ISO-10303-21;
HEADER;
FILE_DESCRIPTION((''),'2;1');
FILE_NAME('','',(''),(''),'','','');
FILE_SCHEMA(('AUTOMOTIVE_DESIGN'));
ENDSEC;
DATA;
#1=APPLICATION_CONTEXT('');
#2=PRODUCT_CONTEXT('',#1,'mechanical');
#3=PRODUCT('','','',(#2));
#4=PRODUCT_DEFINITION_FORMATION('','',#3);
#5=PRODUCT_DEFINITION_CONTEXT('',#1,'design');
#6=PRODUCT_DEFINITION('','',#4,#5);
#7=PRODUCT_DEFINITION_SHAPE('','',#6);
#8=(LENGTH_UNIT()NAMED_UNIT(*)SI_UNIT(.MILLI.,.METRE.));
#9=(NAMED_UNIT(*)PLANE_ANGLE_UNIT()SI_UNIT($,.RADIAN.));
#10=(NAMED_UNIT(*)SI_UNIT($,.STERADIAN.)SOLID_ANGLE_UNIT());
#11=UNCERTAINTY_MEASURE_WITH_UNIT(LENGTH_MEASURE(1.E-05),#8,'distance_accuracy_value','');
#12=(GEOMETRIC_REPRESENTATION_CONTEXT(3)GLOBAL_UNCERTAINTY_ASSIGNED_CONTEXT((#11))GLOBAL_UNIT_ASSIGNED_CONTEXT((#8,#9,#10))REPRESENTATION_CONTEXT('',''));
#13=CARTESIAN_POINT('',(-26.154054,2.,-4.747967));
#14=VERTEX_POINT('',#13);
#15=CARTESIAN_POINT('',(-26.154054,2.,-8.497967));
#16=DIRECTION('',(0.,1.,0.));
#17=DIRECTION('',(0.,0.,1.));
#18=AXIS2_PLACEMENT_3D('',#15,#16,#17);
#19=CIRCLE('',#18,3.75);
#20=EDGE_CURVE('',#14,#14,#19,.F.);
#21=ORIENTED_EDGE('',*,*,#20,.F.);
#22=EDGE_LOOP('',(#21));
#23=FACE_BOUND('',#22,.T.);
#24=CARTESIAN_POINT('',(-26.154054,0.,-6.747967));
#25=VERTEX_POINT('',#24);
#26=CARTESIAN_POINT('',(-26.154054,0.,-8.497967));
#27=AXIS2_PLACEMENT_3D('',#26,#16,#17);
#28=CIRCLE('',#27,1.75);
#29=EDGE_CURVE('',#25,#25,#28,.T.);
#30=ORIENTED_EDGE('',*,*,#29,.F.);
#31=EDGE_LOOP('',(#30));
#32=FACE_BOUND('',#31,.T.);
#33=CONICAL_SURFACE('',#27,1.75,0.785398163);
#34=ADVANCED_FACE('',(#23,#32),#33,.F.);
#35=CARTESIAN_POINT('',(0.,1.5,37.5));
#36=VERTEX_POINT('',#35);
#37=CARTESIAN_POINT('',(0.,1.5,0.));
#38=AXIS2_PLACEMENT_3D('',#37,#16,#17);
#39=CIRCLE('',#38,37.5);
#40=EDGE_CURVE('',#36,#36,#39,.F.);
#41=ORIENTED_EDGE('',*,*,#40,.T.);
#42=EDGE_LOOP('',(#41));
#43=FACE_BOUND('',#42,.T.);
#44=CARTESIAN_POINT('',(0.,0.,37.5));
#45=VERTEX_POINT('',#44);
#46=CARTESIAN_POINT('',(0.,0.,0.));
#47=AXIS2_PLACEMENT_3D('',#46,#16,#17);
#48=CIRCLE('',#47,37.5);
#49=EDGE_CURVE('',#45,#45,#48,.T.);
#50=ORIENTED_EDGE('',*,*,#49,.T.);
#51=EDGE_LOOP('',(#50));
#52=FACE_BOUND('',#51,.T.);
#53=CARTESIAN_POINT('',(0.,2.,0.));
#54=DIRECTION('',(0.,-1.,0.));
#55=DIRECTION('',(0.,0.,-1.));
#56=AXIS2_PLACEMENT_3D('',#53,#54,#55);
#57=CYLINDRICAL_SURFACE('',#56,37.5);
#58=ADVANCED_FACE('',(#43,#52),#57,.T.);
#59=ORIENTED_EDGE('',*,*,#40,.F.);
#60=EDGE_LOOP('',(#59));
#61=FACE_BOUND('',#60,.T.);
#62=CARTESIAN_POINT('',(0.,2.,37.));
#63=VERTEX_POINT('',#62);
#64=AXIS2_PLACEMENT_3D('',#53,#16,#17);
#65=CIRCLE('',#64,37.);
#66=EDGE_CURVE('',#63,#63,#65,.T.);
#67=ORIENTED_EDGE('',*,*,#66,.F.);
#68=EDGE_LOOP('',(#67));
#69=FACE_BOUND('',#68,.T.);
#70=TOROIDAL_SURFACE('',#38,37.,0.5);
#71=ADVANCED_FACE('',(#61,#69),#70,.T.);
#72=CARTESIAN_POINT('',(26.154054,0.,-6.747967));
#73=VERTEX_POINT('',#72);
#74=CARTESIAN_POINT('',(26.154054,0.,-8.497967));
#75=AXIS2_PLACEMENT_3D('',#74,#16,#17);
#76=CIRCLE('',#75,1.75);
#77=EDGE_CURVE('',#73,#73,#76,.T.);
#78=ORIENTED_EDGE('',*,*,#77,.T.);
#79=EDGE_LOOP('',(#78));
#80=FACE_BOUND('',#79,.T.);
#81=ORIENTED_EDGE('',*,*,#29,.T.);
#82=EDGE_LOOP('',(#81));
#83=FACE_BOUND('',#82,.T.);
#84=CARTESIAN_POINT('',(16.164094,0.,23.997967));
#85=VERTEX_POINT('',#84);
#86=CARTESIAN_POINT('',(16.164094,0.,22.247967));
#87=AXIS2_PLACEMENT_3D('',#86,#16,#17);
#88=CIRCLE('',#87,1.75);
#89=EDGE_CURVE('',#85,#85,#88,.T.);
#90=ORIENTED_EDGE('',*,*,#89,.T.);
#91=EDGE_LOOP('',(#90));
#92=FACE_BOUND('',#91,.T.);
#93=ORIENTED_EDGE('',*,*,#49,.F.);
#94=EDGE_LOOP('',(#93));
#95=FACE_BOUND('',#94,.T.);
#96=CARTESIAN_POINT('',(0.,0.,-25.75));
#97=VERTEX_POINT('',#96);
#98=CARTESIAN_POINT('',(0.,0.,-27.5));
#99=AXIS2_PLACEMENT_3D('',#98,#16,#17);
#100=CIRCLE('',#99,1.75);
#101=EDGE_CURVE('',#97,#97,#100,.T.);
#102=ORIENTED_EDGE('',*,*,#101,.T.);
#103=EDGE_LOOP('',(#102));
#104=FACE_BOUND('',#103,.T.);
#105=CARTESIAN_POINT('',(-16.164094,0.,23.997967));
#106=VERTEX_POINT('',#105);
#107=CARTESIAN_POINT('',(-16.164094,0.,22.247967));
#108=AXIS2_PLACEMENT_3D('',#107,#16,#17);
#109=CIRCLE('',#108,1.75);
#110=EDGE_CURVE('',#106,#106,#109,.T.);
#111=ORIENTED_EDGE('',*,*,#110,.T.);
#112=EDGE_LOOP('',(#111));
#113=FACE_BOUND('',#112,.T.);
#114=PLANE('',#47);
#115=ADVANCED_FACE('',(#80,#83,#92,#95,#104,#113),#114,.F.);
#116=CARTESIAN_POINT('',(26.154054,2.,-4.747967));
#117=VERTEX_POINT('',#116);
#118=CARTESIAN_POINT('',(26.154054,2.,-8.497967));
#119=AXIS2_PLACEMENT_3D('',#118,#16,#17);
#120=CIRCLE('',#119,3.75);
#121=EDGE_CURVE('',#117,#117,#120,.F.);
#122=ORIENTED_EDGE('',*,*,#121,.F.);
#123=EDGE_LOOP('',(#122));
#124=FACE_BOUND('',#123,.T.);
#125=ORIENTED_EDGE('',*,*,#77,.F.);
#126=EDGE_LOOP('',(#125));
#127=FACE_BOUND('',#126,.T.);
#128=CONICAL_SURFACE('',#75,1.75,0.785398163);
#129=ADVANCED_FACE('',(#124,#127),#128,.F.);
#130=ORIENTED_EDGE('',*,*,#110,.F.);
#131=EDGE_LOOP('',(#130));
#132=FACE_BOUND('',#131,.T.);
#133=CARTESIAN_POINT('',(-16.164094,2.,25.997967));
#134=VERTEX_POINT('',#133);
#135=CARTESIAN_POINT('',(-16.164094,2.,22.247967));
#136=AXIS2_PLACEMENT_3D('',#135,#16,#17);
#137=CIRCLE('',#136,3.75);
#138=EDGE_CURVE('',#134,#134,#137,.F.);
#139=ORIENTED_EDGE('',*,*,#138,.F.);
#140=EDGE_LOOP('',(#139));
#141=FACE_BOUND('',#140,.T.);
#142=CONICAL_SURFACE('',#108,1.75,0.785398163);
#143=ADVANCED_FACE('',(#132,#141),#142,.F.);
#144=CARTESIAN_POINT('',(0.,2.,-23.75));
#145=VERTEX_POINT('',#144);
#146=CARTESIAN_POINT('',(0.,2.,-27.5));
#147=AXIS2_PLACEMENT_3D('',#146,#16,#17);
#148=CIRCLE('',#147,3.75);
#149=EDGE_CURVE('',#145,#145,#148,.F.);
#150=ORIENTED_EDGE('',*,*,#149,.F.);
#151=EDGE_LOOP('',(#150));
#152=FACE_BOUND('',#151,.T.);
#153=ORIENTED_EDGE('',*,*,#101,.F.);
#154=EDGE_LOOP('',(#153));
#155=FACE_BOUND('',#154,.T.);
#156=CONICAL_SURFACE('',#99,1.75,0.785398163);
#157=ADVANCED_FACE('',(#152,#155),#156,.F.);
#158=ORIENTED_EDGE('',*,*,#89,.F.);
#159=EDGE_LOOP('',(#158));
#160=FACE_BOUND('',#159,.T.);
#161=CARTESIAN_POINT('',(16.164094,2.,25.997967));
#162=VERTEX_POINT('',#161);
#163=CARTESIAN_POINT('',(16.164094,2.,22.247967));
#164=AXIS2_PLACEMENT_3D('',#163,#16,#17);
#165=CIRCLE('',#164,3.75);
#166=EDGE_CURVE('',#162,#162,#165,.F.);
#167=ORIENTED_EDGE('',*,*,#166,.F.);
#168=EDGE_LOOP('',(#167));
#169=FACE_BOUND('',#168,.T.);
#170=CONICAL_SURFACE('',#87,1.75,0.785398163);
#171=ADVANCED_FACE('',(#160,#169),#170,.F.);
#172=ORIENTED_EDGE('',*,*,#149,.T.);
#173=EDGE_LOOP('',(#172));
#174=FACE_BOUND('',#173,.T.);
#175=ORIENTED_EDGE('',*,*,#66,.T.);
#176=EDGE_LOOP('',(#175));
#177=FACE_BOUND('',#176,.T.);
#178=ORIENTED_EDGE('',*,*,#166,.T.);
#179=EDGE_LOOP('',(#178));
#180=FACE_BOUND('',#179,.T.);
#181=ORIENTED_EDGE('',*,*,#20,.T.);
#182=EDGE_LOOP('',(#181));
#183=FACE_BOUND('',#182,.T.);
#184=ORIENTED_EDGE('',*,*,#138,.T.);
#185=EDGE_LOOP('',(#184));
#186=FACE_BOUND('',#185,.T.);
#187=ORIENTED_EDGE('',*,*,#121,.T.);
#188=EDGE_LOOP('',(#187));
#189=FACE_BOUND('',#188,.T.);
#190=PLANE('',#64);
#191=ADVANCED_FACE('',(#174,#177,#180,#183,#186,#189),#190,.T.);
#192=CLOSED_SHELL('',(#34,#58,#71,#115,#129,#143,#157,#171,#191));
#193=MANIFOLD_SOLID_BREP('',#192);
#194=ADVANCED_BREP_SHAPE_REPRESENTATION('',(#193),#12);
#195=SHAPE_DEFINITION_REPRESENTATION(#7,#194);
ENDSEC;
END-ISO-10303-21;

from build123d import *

# Parameters (mm, degrees)
SKETCH2_R           = 37.5
SKETCH2_R_2         = 1.75
BOSS_EXTRUDE1_DEPTH = 2
CHAMFER1_SIZE       = 2
FILLET1_R           = 0.5


with BuildPart() as part:
    # Sketch2 → Boss-Extrude1 (new body)
    with BuildSketch(Plane(origin=(0, 0, 0), x_dir=(1, 0, 0), z_dir=(0, 1, 0))):
        with Locations(Location((0, 0, 0), (0, 0, 270))):
            Circle(SKETCH2_R)
        with Locations(Location((0, 27.5, 0), (0, 0, 270))):
            Circle(SKETCH2_R_2, mode=Mode.SUBTRACT)
        with Locations(Location((26.154054198, 8.497967345, 0), (0, 0, 270))):
            Circle(SKETCH2_R_2, mode=Mode.SUBTRACT)
        with Locations(Location((16.164094438, -22.247967345, 0), (0, 0, 270))):
            Circle(SKETCH2_R_2, mode=Mode.SUBTRACT)
        with Locations(Location((-16.164094438, -22.247967345, 0), (0, 0, 270))):
            Circle(SKETCH2_R_2, mode=Mode.SUBTRACT)
        with Locations(Location((-26.154054198, 8.497967345, 0), (0, 0, 270))):
            Circle(SKETCH2_R_2, mode=Mode.SUBTRACT)
    extrude(amount=BOSS_EXTRUDE1_DEPTH)

    # Chamfer1
    chamfer1_edges = [part.edges().sort_by_distance(p)[0] for p in [
        (-26.154054198, 2, -10.247967345),
        (0, 2, -29.25),
        (26.154054198, 2, -10.247967345),
        (16.164094438, 2, 20.497967345),
        (-16.164094438, 2, 20.497967345),
    ]]
    chamfer(chamfer1_edges, length=CHAMFER1_SIZE - 0.0001)  # a hair under: the kernel refuses the full size

    # Fillet1
    fillet1_edges = [part.edges().sort_by_distance(p)[0] for p in [
        (0, 2, -37.5),
    ]]
    fillet(fillet1_edges, radius=FILLET1_R)


solid = part.part
